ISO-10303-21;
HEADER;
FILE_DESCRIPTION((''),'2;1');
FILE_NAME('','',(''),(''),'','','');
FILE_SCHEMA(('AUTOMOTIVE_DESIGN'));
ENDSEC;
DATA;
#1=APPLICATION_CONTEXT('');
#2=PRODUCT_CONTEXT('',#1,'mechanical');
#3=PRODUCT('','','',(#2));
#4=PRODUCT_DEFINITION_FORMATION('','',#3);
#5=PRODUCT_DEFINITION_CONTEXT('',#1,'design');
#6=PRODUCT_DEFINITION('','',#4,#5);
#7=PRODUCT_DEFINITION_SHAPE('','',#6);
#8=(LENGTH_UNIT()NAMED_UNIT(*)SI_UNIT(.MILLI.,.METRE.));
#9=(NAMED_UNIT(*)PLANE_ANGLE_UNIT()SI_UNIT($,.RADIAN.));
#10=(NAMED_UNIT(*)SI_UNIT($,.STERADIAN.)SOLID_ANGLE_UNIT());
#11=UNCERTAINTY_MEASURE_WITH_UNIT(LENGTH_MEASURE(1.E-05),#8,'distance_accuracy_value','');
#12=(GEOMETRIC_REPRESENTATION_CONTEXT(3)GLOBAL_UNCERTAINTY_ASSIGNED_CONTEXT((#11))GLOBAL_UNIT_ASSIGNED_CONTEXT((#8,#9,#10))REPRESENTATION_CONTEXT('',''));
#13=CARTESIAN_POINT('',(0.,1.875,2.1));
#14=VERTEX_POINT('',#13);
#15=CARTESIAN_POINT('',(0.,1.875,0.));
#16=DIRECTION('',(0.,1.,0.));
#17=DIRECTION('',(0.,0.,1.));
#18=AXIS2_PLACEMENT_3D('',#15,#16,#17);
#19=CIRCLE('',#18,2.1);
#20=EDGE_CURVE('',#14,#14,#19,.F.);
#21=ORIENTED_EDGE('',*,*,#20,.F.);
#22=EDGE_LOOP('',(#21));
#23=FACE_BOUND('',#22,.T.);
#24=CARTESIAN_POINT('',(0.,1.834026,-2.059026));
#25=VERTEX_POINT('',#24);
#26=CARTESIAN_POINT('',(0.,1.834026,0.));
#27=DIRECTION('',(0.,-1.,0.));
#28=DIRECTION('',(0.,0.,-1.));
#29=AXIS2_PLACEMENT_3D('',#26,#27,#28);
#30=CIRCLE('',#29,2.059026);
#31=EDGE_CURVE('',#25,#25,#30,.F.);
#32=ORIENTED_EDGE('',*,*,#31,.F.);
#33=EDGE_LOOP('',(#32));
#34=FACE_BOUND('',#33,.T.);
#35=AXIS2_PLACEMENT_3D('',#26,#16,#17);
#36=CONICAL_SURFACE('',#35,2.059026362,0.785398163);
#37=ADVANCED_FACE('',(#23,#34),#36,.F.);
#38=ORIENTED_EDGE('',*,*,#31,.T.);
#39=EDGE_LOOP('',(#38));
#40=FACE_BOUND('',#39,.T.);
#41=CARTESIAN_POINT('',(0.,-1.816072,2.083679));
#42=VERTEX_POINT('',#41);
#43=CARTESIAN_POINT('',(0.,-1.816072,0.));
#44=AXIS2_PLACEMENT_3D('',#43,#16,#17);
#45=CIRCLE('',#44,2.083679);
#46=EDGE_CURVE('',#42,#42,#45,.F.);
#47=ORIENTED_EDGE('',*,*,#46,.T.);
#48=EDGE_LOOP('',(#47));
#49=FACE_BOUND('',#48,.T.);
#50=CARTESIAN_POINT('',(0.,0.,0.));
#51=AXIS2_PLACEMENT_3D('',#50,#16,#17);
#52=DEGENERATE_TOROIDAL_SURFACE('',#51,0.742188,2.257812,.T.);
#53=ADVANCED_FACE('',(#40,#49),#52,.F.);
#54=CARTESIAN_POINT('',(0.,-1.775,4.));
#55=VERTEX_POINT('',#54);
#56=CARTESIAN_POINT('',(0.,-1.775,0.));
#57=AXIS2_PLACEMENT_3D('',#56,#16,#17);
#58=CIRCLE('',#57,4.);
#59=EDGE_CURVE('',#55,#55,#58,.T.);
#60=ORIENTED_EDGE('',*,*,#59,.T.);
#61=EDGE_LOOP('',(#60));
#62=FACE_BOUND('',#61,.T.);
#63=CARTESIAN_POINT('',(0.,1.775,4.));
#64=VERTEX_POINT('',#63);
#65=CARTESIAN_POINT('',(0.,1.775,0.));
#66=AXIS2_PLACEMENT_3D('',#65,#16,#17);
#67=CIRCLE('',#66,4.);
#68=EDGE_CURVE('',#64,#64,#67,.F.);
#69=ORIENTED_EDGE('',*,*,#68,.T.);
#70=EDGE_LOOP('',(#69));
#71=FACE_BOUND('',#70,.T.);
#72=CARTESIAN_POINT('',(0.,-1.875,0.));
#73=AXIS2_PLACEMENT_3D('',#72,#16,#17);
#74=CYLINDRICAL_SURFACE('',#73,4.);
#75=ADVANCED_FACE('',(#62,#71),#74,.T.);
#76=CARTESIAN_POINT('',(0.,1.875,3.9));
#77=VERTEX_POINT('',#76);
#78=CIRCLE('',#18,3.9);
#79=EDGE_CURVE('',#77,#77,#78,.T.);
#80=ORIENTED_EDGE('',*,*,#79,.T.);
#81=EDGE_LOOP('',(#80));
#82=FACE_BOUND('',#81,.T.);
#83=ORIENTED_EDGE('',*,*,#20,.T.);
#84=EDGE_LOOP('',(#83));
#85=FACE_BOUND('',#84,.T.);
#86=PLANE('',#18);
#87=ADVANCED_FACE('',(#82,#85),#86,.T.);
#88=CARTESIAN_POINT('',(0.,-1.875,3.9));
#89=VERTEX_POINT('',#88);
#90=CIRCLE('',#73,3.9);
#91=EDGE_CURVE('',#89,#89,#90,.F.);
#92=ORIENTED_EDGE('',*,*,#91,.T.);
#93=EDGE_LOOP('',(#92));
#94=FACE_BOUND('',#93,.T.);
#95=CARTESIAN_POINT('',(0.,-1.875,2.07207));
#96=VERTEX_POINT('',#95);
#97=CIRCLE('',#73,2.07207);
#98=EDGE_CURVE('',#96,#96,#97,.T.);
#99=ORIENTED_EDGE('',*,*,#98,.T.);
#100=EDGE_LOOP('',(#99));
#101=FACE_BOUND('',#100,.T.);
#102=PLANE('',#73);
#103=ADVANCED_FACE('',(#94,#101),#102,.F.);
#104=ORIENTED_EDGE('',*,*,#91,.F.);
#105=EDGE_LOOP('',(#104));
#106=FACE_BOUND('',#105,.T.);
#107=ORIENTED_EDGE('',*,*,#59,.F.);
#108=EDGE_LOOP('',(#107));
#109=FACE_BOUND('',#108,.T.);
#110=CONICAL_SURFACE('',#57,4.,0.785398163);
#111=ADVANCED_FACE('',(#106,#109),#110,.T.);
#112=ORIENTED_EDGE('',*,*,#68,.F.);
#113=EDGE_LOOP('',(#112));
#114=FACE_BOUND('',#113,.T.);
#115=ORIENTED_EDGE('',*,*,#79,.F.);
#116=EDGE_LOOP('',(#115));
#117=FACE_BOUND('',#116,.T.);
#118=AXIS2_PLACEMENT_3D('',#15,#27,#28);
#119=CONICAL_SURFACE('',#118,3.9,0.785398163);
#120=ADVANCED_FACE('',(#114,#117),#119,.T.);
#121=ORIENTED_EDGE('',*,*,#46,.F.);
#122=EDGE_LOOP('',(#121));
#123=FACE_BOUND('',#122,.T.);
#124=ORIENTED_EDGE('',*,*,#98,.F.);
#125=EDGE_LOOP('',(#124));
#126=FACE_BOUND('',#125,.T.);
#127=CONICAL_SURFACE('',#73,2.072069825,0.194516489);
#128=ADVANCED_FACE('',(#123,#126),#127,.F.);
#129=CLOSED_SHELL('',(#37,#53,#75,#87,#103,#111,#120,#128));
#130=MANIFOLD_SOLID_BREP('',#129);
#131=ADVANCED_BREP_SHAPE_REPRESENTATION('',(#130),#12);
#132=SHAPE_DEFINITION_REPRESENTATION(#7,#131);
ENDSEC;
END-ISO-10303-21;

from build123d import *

# Parameters (mm, degrees)
BOSS_EXTRUDE1_DEPTH      = 1.875
BOSS_EXTRUDE1_DEPTH_BACK = 1.875
SKETCH1_R                = 4
SKETCH1_R_2              = 2
CHAMFER1_SIZE            = 0.072069825
CHAMFER1_SIZE_2          = 0.1


with BuildPart() as part:
    # Sketch1 → Boss-Extrude1 (new, two sides: drawn at the far end of the back side and taken through both)
    with BuildSketch(Plane(origin=(0, 0, 0), x_dir=(1, 0, 0), z_dir=(0, 1, 0)).offset(-BOSS_EXTRUDE1_DEPTH_BACK)):
        with Locations(Location((0, 0, 0), (0, 0, 270))):
            Circle(SKETCH1_R)
        with Locations(Location((0, 0, 0), (0, 0, 270))):
            Circle(SKETCH1_R_2, mode=Mode.SUBTRACT)
    extrude(amount=BOSS_EXTRUDE1_DEPTH + BOSS_EXTRUDE1_DEPTH_BACK)

    # Sketch3 → Cut-Revolve1 (revolve, cut)
    with BuildSketch(Plane(origin=(0, 0, 0), x_dir=(0, 0, -1), z_dir=(1, 0, 0))):
        with BuildLine():
            Line((-2, 1.875), (-2, -1.875))
            ThreePointArc((-2, -1.875), (-3, 0), (-2, 1.875))
        make_face()
    revolve(axis=Axis((0, 0, 0), (0, -1, 0)), mode=Mode.SUBTRACT)

    # Chamfer1
    # the kernel refuses this chamfer: 0.1, 0.072069825 mm, written as the material it takes off along each edge
    with BuildSketch(Plane(origin=(0, -1.875, 0), x_dir=(0, 0, 1), z_dir=(-1, 0, 0))) as chamfer1_piece_1:
        with BuildLine():
            Line((2 + CHAMFER1_SIZE * 1.00000000606, 0), (2.083679075, 0.058927964))
            ThreePointArc((2.083679075, 0.058927964), (2.043356425, 0.029823392), (2, 0))
            Line((2, 0), (2 + CHAMFER1_SIZE * 1.00000000606, 0))
        make_face()
    revolve(axis=Axis((0, -1.875, 0), (0, 1, 0)), mode=Mode.SUBTRACT)
    with BuildSketch(Plane(origin=(0, 1.875, 0), x_dir=(0, 0, 1), z_dir=(-1, 0, 0))) as chamfer1_piece_2:
        with BuildLine():
            Line((2 + CHAMFER1_SIZE_2, 0), (2.059026362, -0.040973638))
            ThreePointArc((2.059026362, -0.040973638), (2.029383998, -0.020049203), (2, 0))
            Line((2, 0), (2 + CHAMFER1_SIZE_2, 0))
        make_face()
    revolve(axis=Axis((0, 1.875, 0), (0, 1, 0)), mode=Mode.SUBTRACT)
    with BuildSketch(Plane(origin=(0, -1.875, 0), x_dir=(0, 0, 1), z_dir=(-1, 0, 0))) as chamfer1_piece_3:
        Polygon((4, CHAMFER1_SIZE_2), (4 - CHAMFER1_SIZE_2, 0), (4, 0), align=None)
    revolve(axis=Axis((0, -1.875, 0), (0, 1, 0)), mode=Mode.SUBTRACT)
    with BuildSketch(Plane(origin=(0, 1.875, 0), x_dir=(0, 0, 1), z_dir=(-1, 0, 0))) as chamfer1_piece_4:
        Polygon((4, -CHAMFER1_SIZE_2), (4 - CHAMFER1_SIZE_2, 0), (4, 0), align=None)
    revolve(axis=Axis((0, 1.875, 0), (0, 1, 0)), mode=Mode.SUBTRACT)


solid = part.part
